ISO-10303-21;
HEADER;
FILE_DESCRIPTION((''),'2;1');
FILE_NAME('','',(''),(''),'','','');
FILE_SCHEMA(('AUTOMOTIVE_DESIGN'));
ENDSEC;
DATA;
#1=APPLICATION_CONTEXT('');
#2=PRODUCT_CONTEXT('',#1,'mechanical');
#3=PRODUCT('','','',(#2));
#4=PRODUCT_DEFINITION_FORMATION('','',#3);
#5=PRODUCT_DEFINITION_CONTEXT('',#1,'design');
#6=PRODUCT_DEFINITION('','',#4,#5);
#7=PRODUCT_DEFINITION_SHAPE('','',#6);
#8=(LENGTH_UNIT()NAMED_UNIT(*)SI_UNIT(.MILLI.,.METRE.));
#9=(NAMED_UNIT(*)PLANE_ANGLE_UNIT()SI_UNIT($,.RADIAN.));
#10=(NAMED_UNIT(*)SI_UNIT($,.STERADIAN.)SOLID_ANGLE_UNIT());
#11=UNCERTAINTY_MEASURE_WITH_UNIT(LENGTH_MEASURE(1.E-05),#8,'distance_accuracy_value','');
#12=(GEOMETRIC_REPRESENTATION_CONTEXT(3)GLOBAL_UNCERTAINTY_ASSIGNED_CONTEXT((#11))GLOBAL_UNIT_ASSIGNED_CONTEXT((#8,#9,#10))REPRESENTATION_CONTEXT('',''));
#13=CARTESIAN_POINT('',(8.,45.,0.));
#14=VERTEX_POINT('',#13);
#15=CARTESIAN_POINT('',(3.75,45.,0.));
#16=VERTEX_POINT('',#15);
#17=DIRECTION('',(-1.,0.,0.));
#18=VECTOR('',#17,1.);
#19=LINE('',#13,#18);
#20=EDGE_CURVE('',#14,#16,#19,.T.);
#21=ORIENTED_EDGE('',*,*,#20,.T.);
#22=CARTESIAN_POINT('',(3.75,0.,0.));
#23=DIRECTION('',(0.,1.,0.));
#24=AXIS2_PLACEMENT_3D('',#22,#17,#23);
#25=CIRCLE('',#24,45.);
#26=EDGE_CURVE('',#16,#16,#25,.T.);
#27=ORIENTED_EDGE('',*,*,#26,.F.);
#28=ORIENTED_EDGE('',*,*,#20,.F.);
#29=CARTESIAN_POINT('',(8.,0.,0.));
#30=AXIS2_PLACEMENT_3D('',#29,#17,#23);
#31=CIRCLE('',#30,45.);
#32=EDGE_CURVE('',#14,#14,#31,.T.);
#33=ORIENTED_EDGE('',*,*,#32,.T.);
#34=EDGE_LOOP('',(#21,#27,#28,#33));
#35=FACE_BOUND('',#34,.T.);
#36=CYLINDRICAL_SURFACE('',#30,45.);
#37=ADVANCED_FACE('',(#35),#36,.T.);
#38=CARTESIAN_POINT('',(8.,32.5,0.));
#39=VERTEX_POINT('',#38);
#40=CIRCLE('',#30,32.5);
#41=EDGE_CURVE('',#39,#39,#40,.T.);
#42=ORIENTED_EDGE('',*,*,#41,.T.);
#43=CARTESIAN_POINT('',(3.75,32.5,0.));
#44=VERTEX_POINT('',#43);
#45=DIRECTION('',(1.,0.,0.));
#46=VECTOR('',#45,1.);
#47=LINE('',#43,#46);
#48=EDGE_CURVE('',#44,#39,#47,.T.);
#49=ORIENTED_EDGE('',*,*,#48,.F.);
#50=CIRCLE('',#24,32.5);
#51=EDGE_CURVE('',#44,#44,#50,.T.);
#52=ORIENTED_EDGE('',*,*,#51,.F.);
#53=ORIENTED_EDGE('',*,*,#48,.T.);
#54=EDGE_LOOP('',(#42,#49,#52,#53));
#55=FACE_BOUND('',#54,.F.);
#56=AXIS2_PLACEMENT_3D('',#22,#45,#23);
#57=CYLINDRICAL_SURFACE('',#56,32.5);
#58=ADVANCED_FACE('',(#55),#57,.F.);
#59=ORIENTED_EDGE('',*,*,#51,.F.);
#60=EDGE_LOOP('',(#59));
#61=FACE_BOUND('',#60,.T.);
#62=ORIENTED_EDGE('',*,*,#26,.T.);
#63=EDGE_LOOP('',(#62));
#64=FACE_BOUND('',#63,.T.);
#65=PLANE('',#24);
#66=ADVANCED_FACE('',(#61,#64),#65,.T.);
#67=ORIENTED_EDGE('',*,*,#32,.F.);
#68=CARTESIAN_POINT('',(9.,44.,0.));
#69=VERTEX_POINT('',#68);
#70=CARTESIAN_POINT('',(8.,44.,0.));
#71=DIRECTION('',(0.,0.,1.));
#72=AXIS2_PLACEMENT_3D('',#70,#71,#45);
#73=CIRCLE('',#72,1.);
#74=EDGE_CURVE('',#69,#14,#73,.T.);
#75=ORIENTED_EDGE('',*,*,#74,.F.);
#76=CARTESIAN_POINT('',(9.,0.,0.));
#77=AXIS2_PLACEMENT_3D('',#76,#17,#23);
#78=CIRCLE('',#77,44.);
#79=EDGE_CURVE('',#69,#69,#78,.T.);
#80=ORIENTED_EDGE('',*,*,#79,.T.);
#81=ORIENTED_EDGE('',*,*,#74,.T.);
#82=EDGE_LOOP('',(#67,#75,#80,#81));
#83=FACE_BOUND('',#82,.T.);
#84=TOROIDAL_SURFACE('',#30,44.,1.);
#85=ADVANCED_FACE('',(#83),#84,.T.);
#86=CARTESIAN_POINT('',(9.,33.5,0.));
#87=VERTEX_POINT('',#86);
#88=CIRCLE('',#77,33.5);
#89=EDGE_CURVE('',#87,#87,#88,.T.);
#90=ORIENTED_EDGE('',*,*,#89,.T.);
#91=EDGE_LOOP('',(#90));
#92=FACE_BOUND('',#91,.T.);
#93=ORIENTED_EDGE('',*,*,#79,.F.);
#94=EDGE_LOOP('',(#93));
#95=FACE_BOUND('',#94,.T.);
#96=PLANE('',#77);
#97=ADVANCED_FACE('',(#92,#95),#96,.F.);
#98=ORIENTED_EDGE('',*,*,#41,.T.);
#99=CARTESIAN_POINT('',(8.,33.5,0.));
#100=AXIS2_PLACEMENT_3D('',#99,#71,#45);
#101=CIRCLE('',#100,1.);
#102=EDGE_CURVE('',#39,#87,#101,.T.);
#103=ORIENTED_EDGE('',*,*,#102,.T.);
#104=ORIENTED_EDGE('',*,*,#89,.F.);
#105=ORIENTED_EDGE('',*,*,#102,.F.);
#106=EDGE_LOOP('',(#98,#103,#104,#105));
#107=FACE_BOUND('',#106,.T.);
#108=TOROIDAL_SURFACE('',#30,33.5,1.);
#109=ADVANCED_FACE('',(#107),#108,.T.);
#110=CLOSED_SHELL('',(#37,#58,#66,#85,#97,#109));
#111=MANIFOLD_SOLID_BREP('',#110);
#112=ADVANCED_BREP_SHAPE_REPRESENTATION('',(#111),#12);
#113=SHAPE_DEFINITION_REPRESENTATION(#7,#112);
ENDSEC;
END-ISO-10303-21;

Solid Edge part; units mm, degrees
sketch "Sketch1" plane through (0, 0, 0) normal (0, 0, 1) x (1, 0, 0)
  line L0 (3.75, 45) -> (3.75, 32.5)
  line L1 (3.75, 32.5) -> (8, 32.5)
  arc A0 (8, 32.5) -> (9, 33.5) centre (8, 33.5) ccw
  line L2 (9, 33.5) -> (9, 44)
  arc A1 (9, 44) -> (8, 45) centre (8, 44) ccw
  line L3 (8, 45) -> (3.75, 45)
revolve "RevolvedProtrusion1" add sketch "Sketch1" angle 360 about axis through (9, 0, 0) along (-1, 0, 0)
properties part number "SKF_81113 TN_PART3"
